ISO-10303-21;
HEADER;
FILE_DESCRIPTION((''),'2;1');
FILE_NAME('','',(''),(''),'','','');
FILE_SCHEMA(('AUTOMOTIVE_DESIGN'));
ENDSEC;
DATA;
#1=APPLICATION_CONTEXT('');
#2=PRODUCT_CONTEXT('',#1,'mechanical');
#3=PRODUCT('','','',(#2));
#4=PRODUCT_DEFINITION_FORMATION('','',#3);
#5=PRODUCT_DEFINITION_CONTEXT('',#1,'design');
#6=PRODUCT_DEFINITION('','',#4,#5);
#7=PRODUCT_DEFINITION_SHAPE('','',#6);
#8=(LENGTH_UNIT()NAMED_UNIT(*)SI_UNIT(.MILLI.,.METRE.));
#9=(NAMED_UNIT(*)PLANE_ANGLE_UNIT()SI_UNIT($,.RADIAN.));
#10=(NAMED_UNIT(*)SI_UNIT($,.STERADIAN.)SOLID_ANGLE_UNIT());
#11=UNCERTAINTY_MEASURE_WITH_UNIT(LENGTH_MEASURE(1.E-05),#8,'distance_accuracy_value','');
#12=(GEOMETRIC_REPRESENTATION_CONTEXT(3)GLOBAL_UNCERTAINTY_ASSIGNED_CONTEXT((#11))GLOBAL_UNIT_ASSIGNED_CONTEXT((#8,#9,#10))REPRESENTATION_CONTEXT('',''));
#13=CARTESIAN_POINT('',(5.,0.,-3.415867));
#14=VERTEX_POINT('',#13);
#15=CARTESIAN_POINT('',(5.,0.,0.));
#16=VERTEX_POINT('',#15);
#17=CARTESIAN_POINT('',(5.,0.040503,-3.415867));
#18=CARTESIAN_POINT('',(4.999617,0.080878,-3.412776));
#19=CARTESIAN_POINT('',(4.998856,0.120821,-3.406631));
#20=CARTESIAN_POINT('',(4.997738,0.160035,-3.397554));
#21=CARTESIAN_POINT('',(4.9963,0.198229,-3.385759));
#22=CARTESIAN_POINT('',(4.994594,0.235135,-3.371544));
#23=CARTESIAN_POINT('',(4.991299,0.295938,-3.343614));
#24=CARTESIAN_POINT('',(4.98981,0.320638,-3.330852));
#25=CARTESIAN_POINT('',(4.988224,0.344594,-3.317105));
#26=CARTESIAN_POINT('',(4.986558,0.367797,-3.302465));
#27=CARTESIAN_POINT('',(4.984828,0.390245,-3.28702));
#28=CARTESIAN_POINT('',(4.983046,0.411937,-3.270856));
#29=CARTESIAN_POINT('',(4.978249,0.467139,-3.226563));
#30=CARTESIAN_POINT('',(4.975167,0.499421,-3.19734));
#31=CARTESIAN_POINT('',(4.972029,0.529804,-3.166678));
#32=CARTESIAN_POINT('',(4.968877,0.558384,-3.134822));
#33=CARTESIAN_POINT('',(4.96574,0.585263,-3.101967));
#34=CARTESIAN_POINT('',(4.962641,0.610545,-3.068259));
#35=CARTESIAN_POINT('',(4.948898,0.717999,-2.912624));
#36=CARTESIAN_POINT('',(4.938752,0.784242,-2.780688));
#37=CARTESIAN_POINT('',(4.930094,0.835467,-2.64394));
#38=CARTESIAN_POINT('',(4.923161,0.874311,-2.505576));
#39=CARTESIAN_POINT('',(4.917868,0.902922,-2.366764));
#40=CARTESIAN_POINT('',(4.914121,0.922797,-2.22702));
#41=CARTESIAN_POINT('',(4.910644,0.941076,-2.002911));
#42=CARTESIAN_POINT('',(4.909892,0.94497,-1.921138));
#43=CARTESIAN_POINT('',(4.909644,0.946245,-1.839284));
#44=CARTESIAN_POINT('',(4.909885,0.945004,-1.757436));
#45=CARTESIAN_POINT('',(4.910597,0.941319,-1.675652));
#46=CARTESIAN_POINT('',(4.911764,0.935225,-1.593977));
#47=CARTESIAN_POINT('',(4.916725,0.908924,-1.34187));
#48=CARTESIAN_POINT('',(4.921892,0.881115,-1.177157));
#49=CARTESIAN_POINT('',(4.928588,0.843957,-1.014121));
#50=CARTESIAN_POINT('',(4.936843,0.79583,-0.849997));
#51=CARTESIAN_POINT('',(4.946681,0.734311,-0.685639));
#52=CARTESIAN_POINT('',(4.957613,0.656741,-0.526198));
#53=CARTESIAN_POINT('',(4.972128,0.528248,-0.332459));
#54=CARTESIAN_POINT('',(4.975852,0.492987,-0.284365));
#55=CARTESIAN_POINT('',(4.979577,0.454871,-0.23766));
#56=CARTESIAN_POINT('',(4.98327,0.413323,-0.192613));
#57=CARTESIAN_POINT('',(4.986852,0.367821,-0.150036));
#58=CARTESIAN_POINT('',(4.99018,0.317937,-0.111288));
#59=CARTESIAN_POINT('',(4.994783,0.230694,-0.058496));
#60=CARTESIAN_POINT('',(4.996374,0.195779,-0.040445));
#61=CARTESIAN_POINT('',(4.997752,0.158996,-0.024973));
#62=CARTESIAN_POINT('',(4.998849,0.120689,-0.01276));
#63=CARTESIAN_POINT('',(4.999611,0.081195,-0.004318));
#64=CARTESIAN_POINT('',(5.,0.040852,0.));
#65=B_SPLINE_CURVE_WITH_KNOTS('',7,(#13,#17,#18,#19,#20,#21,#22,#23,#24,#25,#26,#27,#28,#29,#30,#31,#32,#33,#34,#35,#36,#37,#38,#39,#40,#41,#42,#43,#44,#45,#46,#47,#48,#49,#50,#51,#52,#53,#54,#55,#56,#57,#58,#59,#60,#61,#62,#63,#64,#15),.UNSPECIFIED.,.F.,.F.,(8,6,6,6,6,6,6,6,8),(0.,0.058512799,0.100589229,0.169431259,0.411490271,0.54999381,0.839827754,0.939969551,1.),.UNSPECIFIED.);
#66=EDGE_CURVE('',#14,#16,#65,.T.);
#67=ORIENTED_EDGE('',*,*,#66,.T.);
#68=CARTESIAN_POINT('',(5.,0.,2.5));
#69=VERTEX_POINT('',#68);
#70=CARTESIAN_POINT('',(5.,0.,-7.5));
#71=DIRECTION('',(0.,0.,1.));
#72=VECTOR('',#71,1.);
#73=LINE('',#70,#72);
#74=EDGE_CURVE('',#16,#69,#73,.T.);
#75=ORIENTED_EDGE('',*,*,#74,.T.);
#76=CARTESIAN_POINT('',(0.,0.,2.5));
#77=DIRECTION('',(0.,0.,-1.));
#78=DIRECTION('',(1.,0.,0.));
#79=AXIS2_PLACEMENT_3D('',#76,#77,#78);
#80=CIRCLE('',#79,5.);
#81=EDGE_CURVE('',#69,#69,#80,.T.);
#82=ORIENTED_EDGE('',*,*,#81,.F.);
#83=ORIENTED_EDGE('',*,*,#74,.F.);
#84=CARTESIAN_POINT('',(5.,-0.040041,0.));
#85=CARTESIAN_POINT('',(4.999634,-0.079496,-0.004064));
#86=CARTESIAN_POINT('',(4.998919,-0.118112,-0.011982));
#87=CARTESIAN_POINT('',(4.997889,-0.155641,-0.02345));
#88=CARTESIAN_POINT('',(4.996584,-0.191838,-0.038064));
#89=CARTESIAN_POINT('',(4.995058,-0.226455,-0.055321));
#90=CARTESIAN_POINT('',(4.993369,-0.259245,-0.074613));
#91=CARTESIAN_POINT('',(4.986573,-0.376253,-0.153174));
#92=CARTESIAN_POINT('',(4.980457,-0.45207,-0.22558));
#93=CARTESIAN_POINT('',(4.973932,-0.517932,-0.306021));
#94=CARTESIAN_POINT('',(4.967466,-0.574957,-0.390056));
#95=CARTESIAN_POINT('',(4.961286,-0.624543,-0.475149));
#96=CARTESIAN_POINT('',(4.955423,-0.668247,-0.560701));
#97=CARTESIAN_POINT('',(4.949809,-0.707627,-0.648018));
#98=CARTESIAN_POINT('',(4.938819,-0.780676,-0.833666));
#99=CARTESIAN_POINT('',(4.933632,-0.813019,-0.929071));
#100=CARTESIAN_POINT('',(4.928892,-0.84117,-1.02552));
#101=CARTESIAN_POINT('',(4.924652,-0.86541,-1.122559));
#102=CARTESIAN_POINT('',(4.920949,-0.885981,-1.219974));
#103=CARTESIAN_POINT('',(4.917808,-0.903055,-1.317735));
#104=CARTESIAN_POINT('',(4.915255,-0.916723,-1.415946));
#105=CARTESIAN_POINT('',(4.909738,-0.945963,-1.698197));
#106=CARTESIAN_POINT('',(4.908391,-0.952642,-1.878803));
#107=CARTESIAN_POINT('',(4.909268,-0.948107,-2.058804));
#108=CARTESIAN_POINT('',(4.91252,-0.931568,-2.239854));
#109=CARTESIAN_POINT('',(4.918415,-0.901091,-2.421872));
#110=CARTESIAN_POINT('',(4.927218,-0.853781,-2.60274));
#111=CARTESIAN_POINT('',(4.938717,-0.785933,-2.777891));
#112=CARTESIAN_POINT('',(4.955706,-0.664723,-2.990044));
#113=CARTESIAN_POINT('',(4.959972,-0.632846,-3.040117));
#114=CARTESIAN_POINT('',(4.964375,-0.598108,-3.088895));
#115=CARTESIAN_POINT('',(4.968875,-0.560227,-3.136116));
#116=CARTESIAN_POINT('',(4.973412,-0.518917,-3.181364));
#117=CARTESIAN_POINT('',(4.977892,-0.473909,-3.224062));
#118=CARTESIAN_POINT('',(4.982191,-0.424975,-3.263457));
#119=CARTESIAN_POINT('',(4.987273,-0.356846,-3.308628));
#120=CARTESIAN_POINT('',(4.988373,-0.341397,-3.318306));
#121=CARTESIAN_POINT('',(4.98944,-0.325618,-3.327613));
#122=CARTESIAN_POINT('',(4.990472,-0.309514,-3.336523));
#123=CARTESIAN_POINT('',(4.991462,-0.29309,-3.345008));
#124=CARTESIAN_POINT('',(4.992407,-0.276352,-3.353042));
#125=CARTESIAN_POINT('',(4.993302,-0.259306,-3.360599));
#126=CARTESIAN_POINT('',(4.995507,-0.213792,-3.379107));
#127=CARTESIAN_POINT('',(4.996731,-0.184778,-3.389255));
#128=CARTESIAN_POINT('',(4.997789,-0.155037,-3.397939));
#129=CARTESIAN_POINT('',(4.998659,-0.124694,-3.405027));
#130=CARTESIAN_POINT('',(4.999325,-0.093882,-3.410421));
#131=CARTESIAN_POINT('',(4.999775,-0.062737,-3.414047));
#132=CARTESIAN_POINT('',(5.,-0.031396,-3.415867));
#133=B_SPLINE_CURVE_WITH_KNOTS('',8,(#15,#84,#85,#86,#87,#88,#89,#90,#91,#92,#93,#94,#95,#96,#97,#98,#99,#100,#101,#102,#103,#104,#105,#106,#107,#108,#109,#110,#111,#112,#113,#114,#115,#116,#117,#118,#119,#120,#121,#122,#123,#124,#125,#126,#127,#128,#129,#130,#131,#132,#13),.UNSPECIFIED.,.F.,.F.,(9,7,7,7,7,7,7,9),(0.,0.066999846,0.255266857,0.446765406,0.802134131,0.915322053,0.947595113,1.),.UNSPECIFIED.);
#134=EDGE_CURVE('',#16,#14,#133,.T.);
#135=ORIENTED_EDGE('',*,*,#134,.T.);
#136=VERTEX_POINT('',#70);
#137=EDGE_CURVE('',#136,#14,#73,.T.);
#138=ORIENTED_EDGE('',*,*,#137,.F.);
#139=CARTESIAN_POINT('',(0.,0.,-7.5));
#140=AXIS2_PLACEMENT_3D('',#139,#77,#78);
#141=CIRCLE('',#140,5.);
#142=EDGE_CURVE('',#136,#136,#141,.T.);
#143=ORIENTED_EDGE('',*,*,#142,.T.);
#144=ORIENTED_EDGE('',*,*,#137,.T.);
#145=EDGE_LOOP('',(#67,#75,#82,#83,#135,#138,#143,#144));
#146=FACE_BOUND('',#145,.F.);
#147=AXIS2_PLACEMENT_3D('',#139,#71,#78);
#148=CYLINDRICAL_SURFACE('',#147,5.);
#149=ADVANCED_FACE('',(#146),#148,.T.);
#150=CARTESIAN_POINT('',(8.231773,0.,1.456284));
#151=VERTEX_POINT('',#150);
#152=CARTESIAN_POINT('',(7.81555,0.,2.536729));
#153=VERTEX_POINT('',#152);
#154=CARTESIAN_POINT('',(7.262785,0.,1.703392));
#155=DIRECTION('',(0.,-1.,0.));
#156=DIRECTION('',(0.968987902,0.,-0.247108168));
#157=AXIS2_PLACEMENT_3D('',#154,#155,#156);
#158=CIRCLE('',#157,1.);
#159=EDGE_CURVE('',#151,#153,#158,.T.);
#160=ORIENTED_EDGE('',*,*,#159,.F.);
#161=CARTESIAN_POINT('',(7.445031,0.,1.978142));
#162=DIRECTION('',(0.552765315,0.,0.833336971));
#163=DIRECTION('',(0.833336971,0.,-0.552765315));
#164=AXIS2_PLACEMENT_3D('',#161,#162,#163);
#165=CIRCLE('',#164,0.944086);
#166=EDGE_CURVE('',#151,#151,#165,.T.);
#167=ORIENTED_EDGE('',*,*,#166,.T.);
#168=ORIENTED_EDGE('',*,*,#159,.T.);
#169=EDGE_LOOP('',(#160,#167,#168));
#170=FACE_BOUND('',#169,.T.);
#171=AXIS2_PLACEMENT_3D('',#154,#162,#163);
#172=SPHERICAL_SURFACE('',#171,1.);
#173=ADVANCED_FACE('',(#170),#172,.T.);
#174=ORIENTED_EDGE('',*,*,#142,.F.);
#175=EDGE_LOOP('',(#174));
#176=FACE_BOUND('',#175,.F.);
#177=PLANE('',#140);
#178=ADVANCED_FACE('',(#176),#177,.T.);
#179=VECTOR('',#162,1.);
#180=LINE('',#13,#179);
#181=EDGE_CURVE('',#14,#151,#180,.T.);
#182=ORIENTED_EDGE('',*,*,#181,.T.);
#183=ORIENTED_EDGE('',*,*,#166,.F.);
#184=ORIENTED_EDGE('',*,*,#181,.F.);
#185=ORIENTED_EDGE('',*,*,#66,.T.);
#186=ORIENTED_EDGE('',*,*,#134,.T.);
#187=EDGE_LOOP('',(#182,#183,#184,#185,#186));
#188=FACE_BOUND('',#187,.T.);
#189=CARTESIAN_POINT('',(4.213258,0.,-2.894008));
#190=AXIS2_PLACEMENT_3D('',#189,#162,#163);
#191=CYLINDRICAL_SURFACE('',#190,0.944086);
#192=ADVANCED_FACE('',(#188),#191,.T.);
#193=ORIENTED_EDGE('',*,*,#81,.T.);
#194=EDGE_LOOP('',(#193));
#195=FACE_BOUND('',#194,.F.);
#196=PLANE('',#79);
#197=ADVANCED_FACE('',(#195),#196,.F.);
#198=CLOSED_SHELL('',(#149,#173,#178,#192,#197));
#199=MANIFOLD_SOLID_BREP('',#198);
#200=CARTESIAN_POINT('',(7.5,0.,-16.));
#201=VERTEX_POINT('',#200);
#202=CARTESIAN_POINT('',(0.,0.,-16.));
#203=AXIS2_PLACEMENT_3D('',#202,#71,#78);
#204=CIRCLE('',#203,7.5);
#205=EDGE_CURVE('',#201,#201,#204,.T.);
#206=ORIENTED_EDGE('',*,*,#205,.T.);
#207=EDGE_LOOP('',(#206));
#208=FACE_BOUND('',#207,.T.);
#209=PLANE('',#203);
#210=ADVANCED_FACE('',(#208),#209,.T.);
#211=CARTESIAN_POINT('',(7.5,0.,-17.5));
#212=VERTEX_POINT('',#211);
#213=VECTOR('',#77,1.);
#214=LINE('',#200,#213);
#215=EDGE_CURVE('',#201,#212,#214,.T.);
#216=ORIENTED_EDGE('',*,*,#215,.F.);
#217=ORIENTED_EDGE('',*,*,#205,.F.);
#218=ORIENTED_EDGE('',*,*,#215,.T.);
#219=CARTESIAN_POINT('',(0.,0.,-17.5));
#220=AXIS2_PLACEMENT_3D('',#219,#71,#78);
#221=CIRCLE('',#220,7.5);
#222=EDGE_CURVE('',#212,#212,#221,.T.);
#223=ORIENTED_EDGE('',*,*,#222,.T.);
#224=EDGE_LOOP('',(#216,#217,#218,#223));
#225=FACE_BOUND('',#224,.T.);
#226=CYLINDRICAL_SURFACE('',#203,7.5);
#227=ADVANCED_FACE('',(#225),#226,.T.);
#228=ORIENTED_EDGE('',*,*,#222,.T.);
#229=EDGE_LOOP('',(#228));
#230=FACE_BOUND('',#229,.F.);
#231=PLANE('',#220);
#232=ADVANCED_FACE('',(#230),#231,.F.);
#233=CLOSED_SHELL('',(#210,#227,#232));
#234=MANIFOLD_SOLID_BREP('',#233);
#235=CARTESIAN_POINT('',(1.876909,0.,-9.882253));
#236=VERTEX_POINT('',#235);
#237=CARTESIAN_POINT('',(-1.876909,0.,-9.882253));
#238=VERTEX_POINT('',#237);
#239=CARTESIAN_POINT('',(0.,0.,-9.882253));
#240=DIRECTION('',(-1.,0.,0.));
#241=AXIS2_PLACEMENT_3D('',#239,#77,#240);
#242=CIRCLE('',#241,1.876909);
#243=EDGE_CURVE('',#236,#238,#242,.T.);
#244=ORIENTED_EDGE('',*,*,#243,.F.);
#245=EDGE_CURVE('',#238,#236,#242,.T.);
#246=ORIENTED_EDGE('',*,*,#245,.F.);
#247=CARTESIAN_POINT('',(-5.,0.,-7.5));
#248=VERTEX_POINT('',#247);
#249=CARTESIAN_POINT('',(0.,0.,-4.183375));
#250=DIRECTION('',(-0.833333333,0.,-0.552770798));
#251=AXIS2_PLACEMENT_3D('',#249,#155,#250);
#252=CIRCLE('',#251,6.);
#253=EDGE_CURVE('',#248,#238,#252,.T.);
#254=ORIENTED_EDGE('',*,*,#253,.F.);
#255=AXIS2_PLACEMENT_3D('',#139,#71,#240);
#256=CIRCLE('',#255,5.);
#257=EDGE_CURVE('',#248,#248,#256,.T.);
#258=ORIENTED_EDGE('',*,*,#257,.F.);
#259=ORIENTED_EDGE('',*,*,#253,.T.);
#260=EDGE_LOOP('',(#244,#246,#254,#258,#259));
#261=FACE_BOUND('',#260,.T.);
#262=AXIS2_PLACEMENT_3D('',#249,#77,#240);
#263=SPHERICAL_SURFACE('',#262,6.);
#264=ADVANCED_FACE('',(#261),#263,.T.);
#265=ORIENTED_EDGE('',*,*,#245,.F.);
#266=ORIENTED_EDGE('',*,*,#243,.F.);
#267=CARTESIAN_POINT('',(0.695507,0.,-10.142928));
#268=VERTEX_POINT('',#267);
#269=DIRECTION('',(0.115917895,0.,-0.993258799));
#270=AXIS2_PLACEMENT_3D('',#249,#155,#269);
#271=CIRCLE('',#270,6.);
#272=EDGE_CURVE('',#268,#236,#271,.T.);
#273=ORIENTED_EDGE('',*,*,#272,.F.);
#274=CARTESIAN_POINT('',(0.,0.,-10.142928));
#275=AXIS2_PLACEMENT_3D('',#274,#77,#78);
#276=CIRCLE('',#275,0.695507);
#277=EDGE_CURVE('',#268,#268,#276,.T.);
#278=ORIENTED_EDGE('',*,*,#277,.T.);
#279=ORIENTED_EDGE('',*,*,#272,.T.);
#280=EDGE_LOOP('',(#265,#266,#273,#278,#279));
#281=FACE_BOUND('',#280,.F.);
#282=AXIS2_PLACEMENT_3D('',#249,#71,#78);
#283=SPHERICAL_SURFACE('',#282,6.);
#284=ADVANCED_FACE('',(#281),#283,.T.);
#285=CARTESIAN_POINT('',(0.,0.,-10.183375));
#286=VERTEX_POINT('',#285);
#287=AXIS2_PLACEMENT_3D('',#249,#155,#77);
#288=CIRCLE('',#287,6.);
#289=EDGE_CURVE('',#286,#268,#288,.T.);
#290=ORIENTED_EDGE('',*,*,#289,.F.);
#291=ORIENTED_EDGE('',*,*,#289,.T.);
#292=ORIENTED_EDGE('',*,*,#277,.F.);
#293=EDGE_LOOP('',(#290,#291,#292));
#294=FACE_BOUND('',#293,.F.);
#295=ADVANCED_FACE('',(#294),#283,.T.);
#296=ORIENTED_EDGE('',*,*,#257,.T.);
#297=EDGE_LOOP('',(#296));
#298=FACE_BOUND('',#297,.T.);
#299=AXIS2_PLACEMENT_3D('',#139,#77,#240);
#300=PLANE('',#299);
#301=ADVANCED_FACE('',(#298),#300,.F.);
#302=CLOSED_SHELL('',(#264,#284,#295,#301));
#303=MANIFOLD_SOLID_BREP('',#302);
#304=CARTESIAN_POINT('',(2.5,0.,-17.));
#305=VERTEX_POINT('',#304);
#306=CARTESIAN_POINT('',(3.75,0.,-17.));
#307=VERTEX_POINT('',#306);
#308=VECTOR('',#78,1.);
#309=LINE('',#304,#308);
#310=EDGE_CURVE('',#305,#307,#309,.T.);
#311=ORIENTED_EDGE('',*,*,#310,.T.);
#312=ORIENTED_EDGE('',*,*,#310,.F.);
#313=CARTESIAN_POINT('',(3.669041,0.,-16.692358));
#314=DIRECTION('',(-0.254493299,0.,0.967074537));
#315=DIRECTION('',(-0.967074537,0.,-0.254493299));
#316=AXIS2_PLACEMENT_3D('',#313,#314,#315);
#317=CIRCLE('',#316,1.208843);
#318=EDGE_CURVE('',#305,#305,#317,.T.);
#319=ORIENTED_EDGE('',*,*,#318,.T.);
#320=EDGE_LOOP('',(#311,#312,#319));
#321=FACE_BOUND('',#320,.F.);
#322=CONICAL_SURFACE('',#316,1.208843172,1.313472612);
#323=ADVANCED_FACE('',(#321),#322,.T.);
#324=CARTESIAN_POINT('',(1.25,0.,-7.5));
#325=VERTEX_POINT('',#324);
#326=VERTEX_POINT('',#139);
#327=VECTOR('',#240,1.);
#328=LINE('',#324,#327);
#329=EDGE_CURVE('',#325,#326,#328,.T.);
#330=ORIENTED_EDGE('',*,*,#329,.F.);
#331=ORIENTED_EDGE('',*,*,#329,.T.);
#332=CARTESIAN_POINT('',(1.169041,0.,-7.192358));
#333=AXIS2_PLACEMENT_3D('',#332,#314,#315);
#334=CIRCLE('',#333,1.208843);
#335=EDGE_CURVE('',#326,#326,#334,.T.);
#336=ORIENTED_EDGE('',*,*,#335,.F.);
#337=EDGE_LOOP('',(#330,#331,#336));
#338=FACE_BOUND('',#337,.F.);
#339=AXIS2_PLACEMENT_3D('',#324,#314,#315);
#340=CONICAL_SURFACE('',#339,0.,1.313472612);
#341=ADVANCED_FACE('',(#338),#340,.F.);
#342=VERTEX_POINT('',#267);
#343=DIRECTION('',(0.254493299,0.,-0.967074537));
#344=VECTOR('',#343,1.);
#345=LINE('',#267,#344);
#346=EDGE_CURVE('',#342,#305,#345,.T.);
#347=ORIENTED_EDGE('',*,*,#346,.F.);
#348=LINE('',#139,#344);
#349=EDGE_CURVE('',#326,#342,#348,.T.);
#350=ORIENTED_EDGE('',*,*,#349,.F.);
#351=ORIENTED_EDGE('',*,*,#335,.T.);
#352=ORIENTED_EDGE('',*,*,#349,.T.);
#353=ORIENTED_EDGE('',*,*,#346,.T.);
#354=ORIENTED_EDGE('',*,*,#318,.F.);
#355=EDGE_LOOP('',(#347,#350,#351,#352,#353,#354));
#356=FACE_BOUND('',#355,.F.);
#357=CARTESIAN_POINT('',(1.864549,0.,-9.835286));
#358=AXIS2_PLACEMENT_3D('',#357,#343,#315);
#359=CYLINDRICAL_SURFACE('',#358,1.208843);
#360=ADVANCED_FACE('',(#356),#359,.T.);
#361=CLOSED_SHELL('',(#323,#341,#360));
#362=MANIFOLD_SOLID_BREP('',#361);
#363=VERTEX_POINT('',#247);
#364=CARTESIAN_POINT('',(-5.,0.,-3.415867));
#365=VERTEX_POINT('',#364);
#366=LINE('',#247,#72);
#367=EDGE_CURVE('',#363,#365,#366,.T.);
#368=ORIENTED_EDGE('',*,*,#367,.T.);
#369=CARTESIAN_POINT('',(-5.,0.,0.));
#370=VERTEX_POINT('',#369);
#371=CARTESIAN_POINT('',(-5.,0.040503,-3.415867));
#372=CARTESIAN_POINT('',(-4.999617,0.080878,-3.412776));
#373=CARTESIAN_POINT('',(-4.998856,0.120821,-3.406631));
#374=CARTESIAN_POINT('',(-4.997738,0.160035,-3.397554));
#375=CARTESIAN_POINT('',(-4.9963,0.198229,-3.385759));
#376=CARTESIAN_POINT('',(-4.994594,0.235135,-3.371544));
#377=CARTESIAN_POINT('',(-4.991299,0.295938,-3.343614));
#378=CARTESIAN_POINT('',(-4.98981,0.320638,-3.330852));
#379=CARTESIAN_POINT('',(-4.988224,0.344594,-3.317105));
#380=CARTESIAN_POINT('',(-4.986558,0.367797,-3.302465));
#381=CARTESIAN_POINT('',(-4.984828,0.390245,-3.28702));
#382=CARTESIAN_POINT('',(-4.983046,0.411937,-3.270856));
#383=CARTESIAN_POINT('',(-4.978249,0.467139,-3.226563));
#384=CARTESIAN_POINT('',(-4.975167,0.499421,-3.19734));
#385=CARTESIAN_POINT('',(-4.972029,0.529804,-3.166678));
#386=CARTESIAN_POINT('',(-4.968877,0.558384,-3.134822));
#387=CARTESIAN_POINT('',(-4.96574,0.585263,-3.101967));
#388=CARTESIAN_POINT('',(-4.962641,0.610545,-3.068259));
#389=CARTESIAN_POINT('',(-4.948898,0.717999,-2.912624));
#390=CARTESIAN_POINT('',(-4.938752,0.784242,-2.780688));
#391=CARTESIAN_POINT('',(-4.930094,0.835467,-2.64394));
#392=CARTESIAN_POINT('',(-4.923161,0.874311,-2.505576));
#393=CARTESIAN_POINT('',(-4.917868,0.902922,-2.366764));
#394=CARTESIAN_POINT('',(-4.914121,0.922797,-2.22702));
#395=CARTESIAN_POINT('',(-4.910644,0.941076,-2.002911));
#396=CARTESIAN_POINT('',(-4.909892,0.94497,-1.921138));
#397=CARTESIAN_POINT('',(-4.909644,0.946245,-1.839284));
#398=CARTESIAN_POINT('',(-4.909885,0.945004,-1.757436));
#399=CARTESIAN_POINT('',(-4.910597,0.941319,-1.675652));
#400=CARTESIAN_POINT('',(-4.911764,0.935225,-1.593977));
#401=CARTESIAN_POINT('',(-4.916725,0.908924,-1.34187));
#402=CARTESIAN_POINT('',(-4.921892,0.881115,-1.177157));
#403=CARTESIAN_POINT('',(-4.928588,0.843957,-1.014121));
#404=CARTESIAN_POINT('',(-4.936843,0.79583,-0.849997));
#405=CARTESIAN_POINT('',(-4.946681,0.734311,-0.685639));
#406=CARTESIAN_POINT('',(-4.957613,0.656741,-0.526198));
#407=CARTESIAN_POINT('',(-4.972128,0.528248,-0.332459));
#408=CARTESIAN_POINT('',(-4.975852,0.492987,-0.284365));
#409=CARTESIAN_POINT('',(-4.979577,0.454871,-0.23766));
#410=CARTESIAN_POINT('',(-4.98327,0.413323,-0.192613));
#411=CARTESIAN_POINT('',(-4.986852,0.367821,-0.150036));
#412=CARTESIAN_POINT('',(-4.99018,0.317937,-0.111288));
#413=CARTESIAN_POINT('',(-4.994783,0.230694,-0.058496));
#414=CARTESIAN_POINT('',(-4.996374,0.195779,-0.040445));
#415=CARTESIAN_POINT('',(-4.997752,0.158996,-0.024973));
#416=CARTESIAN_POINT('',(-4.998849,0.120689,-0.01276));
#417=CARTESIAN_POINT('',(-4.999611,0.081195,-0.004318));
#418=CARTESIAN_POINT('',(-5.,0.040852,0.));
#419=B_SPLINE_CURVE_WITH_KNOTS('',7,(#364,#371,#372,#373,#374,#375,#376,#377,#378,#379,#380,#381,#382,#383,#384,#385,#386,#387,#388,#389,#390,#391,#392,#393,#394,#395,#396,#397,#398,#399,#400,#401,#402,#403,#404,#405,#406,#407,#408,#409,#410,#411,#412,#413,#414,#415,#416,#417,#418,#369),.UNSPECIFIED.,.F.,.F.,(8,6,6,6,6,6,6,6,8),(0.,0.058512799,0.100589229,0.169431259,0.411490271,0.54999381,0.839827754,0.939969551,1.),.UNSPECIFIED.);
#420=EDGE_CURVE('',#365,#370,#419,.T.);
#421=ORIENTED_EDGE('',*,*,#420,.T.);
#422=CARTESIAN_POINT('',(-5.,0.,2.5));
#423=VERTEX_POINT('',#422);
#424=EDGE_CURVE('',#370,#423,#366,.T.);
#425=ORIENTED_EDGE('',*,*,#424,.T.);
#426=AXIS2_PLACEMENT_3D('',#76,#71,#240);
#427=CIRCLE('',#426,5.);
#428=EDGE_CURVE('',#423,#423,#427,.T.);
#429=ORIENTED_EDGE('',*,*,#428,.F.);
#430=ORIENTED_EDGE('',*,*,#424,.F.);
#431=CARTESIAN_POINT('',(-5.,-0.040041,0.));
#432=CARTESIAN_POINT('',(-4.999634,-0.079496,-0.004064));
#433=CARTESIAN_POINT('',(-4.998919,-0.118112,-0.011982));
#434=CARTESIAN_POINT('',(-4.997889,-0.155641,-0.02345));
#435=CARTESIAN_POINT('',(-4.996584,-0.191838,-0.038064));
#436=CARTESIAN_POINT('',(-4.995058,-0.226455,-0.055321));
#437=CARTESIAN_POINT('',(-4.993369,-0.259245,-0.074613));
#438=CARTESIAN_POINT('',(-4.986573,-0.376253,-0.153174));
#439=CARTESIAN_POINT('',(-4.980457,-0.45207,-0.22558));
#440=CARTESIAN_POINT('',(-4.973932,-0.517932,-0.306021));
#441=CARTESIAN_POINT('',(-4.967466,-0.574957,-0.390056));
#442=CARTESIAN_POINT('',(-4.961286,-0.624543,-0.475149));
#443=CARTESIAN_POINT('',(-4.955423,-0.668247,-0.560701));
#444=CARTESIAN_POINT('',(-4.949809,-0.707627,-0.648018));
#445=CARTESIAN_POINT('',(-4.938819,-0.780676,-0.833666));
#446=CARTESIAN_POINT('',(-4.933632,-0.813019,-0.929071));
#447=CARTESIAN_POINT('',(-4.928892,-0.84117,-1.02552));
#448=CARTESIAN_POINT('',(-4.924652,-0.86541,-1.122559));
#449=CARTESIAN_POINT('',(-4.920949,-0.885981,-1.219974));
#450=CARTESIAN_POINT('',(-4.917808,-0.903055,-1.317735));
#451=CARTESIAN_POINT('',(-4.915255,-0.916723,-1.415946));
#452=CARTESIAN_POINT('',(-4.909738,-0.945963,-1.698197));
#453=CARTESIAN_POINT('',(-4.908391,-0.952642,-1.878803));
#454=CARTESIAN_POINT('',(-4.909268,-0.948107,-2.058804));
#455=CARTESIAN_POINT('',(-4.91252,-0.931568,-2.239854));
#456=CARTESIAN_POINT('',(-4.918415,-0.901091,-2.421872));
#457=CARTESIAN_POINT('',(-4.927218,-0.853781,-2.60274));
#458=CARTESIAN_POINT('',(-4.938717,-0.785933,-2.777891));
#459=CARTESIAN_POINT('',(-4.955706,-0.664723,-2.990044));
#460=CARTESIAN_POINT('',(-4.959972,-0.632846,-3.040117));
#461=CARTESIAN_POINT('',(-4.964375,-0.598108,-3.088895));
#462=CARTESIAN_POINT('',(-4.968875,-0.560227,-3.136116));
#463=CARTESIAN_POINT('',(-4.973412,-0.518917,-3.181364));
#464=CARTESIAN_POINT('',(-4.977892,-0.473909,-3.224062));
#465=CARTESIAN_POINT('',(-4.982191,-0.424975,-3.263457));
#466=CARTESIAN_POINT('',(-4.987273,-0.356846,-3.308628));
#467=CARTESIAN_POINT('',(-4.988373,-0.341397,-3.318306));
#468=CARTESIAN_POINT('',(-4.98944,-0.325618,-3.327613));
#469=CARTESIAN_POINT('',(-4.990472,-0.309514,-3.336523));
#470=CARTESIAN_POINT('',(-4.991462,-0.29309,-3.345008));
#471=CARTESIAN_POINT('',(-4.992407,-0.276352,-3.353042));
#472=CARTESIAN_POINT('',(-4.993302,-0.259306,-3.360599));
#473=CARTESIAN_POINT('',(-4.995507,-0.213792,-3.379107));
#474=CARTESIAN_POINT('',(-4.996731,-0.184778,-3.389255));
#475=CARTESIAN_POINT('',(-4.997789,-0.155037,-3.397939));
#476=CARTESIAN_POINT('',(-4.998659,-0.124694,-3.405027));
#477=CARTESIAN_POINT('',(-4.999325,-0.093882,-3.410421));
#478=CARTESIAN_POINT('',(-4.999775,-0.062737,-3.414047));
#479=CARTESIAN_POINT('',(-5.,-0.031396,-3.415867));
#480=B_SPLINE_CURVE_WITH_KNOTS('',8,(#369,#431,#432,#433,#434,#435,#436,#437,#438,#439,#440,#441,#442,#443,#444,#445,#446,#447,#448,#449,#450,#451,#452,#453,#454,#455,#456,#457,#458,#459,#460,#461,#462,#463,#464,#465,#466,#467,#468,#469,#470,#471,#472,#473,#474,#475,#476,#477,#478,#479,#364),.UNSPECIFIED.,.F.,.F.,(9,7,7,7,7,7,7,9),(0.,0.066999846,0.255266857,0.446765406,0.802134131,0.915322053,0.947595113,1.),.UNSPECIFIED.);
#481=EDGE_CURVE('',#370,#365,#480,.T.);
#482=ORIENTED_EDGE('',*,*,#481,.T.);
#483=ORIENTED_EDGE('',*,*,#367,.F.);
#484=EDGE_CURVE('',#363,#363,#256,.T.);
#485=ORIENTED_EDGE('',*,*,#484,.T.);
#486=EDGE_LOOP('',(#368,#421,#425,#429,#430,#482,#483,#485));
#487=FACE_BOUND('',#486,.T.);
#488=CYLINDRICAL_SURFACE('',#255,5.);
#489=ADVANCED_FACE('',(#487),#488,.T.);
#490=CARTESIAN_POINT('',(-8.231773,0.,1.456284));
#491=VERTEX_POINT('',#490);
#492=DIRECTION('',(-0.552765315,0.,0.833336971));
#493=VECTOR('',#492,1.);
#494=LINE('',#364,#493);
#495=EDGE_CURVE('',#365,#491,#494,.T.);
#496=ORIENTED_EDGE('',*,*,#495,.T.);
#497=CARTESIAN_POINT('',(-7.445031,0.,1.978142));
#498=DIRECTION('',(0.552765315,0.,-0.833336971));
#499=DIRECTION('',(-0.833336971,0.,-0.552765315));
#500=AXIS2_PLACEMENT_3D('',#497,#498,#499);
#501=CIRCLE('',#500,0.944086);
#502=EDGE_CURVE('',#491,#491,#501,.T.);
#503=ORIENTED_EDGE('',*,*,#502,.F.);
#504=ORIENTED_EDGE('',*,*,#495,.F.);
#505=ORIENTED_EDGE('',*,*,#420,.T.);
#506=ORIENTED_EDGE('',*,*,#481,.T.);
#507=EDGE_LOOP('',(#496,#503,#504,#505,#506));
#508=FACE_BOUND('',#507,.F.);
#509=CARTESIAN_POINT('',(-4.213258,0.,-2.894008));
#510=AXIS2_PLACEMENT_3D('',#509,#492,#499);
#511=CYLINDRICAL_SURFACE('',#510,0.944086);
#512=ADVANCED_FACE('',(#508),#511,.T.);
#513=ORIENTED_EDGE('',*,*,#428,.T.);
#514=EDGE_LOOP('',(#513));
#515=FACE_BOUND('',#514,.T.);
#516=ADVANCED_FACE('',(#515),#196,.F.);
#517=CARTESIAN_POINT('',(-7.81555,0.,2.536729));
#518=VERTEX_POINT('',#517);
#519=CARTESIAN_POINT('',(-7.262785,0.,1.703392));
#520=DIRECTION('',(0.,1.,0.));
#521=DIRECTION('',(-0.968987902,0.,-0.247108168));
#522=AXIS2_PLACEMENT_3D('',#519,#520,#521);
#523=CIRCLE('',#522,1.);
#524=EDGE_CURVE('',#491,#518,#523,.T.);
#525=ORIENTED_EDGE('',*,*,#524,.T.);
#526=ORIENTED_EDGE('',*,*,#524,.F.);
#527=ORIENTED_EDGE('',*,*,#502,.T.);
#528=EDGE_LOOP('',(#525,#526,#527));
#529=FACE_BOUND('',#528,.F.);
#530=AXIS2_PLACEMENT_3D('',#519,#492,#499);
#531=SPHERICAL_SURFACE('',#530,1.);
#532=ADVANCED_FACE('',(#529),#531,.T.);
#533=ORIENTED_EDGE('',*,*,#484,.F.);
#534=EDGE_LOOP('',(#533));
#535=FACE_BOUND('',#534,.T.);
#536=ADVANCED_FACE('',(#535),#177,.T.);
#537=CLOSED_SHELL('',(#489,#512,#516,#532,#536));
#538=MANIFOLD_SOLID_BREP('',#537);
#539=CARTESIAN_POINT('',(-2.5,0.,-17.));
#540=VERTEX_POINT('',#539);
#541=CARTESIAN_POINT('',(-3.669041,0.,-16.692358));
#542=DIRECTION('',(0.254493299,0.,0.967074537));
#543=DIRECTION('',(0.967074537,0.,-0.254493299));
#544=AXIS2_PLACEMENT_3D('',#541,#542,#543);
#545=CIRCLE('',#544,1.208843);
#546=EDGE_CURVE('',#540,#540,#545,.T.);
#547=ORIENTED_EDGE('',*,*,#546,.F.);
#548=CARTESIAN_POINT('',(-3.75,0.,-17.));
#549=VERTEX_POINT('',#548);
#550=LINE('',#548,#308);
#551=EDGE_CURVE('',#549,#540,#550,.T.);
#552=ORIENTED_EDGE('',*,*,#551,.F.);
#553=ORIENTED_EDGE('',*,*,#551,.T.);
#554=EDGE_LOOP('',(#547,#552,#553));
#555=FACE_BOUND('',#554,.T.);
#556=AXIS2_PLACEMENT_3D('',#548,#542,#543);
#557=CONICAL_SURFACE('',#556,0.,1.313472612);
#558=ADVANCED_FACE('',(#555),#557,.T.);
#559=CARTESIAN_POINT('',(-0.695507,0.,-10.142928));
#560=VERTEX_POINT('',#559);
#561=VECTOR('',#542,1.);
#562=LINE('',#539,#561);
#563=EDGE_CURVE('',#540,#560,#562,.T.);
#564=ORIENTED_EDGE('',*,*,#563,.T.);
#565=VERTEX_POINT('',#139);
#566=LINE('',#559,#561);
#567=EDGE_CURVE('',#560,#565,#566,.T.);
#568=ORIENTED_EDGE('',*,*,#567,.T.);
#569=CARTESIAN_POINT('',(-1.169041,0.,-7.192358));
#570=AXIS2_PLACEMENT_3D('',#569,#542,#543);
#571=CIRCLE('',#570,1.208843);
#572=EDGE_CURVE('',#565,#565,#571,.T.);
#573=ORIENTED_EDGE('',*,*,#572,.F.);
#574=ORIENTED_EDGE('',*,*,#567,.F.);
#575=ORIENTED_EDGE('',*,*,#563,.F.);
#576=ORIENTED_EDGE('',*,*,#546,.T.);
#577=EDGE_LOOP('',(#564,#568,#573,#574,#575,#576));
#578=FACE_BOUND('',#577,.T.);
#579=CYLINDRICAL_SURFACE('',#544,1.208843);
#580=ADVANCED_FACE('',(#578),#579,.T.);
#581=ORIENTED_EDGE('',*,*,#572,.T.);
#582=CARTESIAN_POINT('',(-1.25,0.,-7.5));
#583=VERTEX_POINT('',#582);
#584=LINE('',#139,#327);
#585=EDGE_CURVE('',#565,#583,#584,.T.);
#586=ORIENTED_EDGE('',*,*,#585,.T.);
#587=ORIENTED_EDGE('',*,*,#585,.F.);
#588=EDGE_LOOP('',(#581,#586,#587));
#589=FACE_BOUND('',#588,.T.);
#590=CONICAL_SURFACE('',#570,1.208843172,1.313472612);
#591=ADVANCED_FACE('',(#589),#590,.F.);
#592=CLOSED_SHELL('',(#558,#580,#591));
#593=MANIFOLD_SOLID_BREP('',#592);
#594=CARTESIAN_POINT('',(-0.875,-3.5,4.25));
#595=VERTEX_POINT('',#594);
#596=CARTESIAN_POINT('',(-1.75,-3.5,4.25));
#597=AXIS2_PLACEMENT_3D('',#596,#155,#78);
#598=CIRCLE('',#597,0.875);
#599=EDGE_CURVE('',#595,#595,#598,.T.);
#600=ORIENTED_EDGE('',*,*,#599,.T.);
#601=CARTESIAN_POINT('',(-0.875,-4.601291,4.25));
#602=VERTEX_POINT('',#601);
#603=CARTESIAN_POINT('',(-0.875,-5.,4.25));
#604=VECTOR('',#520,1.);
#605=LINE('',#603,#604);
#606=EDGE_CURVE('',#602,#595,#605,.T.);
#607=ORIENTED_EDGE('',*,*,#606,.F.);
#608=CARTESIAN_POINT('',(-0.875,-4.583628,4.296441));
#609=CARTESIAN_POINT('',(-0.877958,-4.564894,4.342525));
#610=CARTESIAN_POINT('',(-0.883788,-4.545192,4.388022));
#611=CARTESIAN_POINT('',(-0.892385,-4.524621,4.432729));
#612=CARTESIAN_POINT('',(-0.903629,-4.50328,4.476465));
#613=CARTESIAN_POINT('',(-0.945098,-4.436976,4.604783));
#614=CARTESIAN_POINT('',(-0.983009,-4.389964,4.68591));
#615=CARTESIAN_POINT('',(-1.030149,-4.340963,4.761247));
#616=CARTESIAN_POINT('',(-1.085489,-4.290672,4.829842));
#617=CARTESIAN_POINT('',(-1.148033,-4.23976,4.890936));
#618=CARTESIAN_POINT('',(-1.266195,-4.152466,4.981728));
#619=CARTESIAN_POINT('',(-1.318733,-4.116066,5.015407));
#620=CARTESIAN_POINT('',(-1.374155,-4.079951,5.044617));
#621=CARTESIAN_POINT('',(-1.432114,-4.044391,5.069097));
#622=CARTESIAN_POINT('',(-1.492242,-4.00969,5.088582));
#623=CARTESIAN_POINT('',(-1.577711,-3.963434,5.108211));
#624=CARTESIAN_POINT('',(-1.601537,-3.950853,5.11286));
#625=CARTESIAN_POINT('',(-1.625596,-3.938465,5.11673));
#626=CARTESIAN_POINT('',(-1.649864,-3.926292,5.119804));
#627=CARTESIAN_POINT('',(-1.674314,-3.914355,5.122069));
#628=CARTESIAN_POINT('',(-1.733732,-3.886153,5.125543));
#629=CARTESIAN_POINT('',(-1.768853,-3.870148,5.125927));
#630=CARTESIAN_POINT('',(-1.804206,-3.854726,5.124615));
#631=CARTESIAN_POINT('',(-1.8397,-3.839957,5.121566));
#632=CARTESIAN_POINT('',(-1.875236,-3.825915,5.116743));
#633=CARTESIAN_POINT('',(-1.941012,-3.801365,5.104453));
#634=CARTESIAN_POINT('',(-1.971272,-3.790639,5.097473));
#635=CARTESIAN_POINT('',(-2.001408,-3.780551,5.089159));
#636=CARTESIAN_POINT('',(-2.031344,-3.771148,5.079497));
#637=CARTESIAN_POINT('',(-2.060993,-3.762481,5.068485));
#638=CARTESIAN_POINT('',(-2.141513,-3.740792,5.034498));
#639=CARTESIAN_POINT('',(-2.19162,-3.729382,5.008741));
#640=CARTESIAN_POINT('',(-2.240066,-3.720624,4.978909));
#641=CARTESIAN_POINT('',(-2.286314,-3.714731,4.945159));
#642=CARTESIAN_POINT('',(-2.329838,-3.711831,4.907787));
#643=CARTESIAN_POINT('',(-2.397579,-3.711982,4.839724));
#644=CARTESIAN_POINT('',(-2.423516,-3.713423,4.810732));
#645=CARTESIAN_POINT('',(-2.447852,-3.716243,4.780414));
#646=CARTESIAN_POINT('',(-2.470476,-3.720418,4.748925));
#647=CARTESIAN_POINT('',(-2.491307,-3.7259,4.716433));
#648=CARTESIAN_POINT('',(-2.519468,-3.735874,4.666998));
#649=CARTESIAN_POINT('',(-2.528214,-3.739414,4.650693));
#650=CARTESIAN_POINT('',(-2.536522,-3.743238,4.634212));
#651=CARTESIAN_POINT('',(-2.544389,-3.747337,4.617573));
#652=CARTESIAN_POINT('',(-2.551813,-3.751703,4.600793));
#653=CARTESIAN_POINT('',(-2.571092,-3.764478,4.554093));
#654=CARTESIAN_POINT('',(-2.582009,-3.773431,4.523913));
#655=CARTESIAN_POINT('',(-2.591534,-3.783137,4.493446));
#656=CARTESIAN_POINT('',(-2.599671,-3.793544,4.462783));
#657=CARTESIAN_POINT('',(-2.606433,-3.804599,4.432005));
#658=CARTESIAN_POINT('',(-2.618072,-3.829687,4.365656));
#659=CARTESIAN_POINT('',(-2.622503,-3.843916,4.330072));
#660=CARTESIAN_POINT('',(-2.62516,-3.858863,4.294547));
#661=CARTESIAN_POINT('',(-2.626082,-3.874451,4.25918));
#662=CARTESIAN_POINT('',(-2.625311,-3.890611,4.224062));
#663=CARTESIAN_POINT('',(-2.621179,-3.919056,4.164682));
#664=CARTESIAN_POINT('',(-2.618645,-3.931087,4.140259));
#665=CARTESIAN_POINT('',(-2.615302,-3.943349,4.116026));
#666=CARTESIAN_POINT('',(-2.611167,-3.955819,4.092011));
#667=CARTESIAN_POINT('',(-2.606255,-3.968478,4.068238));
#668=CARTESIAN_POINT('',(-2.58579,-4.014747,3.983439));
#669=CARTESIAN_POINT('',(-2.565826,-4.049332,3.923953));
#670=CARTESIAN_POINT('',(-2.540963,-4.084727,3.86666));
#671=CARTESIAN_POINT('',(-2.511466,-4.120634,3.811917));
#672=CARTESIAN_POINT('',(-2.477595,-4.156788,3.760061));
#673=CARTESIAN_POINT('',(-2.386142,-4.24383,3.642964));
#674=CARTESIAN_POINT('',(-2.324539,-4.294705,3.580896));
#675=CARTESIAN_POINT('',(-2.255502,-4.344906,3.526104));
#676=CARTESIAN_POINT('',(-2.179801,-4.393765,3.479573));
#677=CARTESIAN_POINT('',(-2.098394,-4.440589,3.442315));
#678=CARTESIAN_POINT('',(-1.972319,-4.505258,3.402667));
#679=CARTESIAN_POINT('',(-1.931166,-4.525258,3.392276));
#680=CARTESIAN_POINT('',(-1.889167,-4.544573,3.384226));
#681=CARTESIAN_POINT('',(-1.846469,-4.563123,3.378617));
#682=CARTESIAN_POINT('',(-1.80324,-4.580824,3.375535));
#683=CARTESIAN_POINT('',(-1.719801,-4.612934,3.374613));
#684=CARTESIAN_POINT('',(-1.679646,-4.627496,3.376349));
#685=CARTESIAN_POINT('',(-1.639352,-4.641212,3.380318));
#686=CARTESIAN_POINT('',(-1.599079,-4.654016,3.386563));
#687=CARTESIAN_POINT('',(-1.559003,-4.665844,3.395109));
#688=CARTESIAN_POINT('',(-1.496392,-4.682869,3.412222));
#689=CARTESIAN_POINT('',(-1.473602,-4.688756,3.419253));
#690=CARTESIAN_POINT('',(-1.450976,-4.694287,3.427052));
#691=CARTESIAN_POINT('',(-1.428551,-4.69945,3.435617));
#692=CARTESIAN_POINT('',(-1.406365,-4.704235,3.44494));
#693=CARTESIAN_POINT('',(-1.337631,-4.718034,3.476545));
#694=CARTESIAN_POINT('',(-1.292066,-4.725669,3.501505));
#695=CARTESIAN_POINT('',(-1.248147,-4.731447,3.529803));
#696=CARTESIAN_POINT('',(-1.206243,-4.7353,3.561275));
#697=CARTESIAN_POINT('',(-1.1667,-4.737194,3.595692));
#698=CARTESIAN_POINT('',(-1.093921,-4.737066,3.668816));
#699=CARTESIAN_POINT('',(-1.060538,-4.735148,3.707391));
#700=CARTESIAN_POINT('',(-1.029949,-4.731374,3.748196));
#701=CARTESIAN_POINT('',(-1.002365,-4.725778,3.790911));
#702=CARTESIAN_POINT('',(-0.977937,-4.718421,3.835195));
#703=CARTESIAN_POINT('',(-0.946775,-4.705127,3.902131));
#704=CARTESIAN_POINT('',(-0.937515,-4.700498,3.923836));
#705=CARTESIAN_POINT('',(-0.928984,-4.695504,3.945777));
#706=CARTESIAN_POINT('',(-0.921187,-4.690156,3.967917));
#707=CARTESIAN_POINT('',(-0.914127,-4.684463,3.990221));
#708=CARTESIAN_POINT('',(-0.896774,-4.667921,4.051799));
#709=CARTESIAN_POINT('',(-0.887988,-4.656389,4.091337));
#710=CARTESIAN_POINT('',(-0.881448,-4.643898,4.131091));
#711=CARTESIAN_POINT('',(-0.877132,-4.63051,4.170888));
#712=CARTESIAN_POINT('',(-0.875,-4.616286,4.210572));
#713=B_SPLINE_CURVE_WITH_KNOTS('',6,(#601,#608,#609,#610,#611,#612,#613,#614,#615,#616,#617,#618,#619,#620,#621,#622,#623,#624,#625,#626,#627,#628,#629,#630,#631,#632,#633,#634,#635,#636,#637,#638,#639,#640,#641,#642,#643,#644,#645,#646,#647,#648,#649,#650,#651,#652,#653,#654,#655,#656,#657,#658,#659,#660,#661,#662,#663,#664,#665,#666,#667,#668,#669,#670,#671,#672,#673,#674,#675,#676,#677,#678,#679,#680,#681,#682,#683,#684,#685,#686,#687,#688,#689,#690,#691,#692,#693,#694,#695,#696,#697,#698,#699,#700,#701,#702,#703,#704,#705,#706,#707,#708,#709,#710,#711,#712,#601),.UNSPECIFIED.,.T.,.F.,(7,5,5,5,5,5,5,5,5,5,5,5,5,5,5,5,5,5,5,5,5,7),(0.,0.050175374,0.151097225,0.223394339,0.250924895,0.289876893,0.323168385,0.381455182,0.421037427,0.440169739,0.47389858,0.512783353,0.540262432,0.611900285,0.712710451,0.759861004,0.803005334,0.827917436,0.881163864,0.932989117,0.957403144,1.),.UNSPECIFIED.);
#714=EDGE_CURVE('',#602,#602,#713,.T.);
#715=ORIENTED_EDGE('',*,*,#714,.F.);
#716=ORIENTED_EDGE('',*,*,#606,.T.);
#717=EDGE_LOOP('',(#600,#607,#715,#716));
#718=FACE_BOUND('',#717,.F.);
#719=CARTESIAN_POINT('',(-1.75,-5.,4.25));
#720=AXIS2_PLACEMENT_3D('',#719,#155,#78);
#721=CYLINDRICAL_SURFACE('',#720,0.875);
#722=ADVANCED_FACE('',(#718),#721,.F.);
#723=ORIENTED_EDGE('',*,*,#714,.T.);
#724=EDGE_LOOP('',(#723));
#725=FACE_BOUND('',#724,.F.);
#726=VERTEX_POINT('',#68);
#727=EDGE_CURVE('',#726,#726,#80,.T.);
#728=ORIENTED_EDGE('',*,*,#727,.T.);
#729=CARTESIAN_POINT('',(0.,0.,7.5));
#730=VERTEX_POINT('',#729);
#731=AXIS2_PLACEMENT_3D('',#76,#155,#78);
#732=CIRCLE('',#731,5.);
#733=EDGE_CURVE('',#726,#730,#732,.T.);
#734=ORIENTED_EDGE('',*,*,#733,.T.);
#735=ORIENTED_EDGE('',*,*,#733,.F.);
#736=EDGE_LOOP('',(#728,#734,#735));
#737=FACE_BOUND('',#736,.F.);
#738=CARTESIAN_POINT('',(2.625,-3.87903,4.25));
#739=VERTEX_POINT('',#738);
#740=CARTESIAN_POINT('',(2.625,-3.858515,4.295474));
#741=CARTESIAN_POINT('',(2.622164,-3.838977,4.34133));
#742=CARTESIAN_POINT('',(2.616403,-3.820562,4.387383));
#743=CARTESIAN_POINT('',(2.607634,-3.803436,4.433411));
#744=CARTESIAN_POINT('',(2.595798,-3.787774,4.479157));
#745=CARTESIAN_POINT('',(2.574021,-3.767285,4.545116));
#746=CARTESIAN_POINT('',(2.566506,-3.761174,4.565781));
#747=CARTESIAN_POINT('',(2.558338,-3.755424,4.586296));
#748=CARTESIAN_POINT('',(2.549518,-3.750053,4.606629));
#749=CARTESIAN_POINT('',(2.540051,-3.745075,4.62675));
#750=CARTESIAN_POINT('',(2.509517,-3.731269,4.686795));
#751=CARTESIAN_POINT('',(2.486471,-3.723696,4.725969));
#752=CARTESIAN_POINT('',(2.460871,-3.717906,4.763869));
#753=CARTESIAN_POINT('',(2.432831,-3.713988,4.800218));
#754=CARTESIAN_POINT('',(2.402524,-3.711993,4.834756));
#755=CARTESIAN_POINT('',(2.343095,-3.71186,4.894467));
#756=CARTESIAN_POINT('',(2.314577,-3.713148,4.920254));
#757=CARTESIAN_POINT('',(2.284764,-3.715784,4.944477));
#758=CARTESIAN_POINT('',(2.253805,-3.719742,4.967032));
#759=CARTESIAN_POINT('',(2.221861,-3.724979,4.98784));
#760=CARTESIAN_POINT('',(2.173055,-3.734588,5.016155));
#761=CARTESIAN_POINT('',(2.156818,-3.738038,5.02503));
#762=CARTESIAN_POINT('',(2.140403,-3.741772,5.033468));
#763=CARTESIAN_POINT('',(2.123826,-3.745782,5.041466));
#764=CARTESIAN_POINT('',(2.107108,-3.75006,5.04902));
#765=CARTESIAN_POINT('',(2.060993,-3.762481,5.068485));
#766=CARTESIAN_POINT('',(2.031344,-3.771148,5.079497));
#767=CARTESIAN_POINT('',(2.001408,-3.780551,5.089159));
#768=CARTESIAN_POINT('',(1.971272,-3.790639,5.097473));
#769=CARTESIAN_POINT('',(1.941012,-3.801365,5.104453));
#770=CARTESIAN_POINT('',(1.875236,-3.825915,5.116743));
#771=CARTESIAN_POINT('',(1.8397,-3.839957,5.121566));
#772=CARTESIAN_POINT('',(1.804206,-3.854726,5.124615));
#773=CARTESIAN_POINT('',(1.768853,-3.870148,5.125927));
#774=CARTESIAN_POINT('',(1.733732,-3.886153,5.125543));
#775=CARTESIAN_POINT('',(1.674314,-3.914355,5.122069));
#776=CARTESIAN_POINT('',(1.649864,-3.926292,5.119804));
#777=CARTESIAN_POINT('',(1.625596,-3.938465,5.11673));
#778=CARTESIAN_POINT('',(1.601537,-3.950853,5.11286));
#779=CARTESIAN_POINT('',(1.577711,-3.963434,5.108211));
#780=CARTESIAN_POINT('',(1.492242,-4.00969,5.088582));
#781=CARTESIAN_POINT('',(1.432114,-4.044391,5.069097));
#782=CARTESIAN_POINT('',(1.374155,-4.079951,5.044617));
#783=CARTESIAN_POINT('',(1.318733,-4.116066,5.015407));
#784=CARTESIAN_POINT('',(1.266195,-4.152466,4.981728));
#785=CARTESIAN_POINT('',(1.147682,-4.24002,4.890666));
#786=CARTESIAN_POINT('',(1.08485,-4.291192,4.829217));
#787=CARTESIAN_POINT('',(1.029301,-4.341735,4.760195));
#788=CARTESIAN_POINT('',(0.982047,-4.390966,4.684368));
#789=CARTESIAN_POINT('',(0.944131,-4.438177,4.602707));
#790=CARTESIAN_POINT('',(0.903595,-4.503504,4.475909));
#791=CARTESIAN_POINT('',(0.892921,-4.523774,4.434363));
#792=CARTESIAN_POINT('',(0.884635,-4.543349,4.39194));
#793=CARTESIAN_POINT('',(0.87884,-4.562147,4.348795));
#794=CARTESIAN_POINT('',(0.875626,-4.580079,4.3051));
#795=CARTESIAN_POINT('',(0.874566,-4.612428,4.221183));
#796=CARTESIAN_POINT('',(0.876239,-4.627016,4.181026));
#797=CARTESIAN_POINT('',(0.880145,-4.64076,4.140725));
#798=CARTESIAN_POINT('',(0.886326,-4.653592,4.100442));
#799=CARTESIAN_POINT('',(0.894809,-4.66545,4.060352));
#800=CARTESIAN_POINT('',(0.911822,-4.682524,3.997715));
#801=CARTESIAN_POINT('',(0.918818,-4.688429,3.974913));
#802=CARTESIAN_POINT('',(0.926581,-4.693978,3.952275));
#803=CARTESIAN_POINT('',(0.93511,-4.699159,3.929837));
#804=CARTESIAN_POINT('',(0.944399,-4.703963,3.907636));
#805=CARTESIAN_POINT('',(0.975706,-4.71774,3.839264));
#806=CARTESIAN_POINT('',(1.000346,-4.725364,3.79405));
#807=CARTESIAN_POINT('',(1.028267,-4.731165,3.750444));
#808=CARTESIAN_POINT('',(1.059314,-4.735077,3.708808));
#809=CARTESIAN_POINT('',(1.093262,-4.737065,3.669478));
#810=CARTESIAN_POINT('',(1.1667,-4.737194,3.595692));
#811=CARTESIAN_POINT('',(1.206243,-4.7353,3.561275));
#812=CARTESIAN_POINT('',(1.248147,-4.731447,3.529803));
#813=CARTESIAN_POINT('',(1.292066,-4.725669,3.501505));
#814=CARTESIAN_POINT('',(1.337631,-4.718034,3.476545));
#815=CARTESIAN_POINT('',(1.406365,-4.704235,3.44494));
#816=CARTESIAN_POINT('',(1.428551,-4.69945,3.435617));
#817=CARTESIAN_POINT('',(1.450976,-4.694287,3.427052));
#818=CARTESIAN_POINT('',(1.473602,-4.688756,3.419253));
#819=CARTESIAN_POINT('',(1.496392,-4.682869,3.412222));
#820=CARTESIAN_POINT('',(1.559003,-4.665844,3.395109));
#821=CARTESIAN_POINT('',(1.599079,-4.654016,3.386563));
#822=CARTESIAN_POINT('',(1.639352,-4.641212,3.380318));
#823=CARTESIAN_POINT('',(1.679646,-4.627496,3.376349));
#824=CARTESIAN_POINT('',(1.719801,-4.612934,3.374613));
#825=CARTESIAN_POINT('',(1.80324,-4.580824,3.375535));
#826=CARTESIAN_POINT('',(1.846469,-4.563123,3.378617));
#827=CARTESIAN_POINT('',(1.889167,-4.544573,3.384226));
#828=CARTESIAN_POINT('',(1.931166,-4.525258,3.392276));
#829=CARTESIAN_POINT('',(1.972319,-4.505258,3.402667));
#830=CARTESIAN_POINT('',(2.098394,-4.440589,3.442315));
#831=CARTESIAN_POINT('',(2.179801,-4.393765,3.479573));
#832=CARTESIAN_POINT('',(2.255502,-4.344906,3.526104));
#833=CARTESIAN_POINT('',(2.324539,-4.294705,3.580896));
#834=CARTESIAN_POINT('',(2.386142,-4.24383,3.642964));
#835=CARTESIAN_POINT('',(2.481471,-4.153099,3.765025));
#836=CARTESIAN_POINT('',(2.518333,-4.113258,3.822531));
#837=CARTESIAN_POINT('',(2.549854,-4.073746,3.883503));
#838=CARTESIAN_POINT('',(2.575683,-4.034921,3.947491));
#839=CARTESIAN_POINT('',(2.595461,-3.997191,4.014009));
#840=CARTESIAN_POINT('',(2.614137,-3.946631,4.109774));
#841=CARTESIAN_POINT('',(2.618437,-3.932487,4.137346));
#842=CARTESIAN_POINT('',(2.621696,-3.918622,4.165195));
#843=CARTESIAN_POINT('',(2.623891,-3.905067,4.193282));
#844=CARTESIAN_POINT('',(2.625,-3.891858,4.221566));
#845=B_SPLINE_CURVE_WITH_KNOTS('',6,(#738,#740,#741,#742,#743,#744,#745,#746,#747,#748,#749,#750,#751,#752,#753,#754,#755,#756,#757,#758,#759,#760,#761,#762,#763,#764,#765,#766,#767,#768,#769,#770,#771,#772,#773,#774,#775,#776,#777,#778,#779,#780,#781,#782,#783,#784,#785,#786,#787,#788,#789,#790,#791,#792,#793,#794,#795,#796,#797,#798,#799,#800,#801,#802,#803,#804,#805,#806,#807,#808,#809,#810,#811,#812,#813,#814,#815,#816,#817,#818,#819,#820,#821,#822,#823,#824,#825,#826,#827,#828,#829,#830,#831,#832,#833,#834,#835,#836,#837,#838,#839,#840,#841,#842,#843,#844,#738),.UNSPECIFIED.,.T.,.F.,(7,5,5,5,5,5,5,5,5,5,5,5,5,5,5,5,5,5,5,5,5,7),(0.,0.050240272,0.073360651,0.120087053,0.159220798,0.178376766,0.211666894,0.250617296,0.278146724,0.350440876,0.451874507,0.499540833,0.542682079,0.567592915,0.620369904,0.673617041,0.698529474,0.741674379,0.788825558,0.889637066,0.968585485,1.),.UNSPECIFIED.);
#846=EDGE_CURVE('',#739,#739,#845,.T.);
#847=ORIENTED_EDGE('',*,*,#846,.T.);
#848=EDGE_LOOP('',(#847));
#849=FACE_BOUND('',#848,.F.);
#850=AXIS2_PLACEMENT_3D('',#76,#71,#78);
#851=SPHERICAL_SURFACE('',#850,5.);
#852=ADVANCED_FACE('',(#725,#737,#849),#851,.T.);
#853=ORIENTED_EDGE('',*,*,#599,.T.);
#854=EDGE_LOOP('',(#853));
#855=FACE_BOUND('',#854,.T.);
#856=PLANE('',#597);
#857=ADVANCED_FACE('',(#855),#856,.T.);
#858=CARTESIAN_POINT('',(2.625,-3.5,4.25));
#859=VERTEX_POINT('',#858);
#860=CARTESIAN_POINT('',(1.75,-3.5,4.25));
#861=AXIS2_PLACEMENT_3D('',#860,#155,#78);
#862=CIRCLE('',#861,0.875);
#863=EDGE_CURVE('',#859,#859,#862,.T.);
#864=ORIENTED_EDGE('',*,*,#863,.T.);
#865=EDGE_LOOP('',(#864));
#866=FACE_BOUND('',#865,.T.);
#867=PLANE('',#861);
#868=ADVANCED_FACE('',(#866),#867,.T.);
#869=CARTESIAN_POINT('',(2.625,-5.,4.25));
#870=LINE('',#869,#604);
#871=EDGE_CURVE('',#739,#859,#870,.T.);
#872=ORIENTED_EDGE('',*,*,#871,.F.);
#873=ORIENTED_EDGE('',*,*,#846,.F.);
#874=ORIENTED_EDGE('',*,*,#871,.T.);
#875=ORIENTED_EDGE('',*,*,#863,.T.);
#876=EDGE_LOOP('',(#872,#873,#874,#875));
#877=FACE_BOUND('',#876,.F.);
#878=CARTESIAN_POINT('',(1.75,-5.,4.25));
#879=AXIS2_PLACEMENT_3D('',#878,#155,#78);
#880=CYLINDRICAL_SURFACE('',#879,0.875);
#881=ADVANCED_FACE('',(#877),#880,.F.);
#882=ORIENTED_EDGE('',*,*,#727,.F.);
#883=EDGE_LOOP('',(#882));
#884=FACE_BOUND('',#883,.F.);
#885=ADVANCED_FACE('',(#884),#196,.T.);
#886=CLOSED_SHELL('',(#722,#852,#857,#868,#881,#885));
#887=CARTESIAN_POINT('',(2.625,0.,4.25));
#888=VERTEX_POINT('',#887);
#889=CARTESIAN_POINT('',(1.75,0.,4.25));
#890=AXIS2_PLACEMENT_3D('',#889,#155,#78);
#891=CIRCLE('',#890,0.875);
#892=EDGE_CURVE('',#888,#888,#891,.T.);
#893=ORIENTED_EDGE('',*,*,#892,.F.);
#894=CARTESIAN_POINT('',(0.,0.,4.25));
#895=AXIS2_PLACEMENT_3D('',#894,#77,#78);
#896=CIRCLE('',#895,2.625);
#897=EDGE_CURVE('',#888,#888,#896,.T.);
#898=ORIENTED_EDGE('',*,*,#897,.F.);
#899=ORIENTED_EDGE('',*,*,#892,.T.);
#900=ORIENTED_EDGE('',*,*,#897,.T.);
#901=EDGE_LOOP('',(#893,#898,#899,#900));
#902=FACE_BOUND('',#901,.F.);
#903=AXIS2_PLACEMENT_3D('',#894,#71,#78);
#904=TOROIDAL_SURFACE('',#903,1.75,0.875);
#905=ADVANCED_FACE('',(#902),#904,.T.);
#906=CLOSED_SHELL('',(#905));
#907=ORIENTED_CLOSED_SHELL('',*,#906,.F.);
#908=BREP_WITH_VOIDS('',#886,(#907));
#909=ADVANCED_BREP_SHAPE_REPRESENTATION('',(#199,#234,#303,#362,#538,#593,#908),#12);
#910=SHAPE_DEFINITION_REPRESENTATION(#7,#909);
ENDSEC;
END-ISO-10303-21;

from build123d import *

# Parameters (mm, degrees)
F0_R      = 0.875
F4_R      = 0.875
F5_DEPTH  = 1.5
F9_R      = 7.5
F10_DEPTH = 1.5


with BuildPart() as f1:
    # F0 (on Front) → F1 (revolve)
    with BuildSketch(Plane.XZ):
        with BuildLine():
            Line((0, 7.5), (0, 2.5))
            Line((0, 2.5), (5, 2.5))
            ThreePointArc((5, 2.5), (3.5355339059, 6.0355339059), (0, 7.5))
        make_face()
        with Locations((1.75, 4.25)):
            Circle(F0_R, mode=Mode.SUBTRACT)
    revolve(axis=Axis((0, 0, 3.75), (0, 0, -1)))

    # F4 (on offset) → F5 (cut)
    with BuildSketch(Plane.XZ.offset(5)):
        with Locations((-1.75, 4.25)):
            Circle(F4_R)
        with Locations((1.75, 4.25)):
            Circle(F4_R)
    extrude(amount=-F5_DEPTH, mode=Mode.SUBTRACT)


with BuildPart() as f2:
    # F0 (on Front) → F2 (revolve)
    with BuildSketch(Plane.XZ):
        Polygon((5, 2.5), (0, 2.5), (0, 0), (0, -7.5), (1.25, -7.5), (2.5, -7.5), (5, -7.5), (5, -3.4158665221), (5, -1.7079332611), (5, 0), align=None)
    revolve(axis=Axis((0, 0, 3.75), (0, 0, -1)))

    # F0 (on Front) → F6 (revolve)
    with BuildSketch(Plane.XZ):
        Polygon((7.4450306957, 1.9781418576), (5, -1.7079332611), (5, -3.4158665221), (8.2317726852, 1.4562837153), align=None)
        with BuildLine():
            Line((7.8155500984, 2.5367288536), (7.4450306957, 1.9781418576))
            Line((7.4450306957, 1.9781418576), (8.2317726852, 1.4562837153))
            ThreePointArc((8.2317726852, 1.4562837153), (8.1959373098, 2.0628725678), (7.8155500984, 2.5367288536))
        make_face()
    revolve(axis=Axis((6.2225153478, 0, 0.1351042983), (0.5527653148, 0, 0.8333369707)))


with BuildPart() as f7_1:
    # F7: instance of F2
    add(f2.part.mirror(Plane.YZ))


with BuildPart() as f10:
    # F9 (on offset) → F10 (new body)
    with BuildSketch(Plane.XY.offset(-16)):
        Circle(F9_R)
    extrude(amount=-F10_DEPTH)


with BuildPart() as f11:
    # F0 (on Front) → F11 (revolve)
    with BuildSketch(Plane.XZ):
        with BuildLine():
            ThreePointArc((1.8769088058, -9.882253462), (1.2927950528, -10.0424434761), (0.6955073693, -10.1429280032))
            Line((0.6955073693, -10.1429280032), (2.5, -17))
            Line((2.5, -17), (3.75, -17))
            Line((3.75, -17), (1.8769088058, -9.882253462))
        make_face()
        with BuildLine():
            Line((1.25, -7.5), (0, -7.5))
            Line((0, -7.5), (0.6955073693, -10.1429280032))
            ThreePointArc((0.6955073693, -10.1429280032), (1.2927950528, -10.0424434761), (1.8769088058, -9.882253462))
            Line((1.8769088058, -9.882253462), (1.25, -7.5))
        make_face()
    revolve(axis=Axis((2.5, 0, -12.25), (-0.2544932993, 0, 0.9670745373)))


with BuildPart() as f12:
    # F0 (on Front) → F12 (revolve)
    with BuildSketch(Plane.XZ):
        with BuildLine():
            Line((-2.5, -17), (-0.6955073693, -10.1429280032))
            ThreePointArc((-0.6955073693, -10.1429280032), (-1.2927950528, -10.0424434761), (-1.8769088058, -9.882253462))
            Line((-1.8769088058, -9.882253462), (-3.75, -17))
            Line((-3.75, -17), (-2.5, -17))
        make_face()
        with BuildLine():
            Line((-0.6955073693, -10.1429280032), (0, -7.5))
            Line((0, -7.5), (-1.25, -7.5))
            Line((-1.25, -7.5), (-1.8769088058, -9.882253462))
            ThreePointArc((-1.8769088058, -9.882253462), (-1.2927950528, -10.0424434761), (-0.6955073693, -10.1429280032))
        make_face()
    revolve(axis=Axis((-2.5, 0, -12.25), (0.2544932993, 0, 0.9670745373)))


with BuildPart() as f13:
    # F0 (on Front) → F13 (revolve)
    with BuildSketch(Plane.XZ):
        with BuildLine():
            Line((0.6955073693, -10.1429280032), (0, -7.5))
            Line((0, -7.5), (0, -9.4098300563))
            Line((0, -9.4098300563), (0, -10.1833752096))
            ThreePointArc((0, -10.1833752096), (0.3483412397, -10.1732548729), (0.6955073693, -10.1429280032))
        make_face()
        with BuildLine():
            Line((1.25, -7.5), (0, -7.5))
            Line((0, -7.5), (0.6955073693, -10.1429280032))
            ThreePointArc((0.6955073693, -10.1429280032), (1.2927950528, -10.0424434761), (1.8769088058, -9.882253462))
            Line((1.8769088058, -9.882253462), (1.25, -7.5))
        make_face()
        with BuildLine():
            Line((-1.8769088058, -9.882253462), (-1.25, -7.5))
            Line((-1.25, -7.5), (-5, -7.5))
            ThreePointArc((-5, -7.5), (-3.6389217593, -8.9539358088), (-1.8769088058, -9.882253462))
        make_face()
        with BuildLine():
            Line((2.5, -7.5), (1.25, -7.5))
            Line((1.25, -7.5), (1.8769088058, -9.882253462))
            ThreePointArc((1.8769088058, -9.882253462), (3.6389217593, -8.9539358088), (5, -7.5))
            Line((5, -7.5), (2.5, -7.5))
        make_face()
    revolve(axis=Axis((0, 0, -8.8416876048), (0, 0, -1)))


solid = Compound([f1.part, f2.part, f7_1.part, f10.part, f11.part, f12.part, f13.part])
